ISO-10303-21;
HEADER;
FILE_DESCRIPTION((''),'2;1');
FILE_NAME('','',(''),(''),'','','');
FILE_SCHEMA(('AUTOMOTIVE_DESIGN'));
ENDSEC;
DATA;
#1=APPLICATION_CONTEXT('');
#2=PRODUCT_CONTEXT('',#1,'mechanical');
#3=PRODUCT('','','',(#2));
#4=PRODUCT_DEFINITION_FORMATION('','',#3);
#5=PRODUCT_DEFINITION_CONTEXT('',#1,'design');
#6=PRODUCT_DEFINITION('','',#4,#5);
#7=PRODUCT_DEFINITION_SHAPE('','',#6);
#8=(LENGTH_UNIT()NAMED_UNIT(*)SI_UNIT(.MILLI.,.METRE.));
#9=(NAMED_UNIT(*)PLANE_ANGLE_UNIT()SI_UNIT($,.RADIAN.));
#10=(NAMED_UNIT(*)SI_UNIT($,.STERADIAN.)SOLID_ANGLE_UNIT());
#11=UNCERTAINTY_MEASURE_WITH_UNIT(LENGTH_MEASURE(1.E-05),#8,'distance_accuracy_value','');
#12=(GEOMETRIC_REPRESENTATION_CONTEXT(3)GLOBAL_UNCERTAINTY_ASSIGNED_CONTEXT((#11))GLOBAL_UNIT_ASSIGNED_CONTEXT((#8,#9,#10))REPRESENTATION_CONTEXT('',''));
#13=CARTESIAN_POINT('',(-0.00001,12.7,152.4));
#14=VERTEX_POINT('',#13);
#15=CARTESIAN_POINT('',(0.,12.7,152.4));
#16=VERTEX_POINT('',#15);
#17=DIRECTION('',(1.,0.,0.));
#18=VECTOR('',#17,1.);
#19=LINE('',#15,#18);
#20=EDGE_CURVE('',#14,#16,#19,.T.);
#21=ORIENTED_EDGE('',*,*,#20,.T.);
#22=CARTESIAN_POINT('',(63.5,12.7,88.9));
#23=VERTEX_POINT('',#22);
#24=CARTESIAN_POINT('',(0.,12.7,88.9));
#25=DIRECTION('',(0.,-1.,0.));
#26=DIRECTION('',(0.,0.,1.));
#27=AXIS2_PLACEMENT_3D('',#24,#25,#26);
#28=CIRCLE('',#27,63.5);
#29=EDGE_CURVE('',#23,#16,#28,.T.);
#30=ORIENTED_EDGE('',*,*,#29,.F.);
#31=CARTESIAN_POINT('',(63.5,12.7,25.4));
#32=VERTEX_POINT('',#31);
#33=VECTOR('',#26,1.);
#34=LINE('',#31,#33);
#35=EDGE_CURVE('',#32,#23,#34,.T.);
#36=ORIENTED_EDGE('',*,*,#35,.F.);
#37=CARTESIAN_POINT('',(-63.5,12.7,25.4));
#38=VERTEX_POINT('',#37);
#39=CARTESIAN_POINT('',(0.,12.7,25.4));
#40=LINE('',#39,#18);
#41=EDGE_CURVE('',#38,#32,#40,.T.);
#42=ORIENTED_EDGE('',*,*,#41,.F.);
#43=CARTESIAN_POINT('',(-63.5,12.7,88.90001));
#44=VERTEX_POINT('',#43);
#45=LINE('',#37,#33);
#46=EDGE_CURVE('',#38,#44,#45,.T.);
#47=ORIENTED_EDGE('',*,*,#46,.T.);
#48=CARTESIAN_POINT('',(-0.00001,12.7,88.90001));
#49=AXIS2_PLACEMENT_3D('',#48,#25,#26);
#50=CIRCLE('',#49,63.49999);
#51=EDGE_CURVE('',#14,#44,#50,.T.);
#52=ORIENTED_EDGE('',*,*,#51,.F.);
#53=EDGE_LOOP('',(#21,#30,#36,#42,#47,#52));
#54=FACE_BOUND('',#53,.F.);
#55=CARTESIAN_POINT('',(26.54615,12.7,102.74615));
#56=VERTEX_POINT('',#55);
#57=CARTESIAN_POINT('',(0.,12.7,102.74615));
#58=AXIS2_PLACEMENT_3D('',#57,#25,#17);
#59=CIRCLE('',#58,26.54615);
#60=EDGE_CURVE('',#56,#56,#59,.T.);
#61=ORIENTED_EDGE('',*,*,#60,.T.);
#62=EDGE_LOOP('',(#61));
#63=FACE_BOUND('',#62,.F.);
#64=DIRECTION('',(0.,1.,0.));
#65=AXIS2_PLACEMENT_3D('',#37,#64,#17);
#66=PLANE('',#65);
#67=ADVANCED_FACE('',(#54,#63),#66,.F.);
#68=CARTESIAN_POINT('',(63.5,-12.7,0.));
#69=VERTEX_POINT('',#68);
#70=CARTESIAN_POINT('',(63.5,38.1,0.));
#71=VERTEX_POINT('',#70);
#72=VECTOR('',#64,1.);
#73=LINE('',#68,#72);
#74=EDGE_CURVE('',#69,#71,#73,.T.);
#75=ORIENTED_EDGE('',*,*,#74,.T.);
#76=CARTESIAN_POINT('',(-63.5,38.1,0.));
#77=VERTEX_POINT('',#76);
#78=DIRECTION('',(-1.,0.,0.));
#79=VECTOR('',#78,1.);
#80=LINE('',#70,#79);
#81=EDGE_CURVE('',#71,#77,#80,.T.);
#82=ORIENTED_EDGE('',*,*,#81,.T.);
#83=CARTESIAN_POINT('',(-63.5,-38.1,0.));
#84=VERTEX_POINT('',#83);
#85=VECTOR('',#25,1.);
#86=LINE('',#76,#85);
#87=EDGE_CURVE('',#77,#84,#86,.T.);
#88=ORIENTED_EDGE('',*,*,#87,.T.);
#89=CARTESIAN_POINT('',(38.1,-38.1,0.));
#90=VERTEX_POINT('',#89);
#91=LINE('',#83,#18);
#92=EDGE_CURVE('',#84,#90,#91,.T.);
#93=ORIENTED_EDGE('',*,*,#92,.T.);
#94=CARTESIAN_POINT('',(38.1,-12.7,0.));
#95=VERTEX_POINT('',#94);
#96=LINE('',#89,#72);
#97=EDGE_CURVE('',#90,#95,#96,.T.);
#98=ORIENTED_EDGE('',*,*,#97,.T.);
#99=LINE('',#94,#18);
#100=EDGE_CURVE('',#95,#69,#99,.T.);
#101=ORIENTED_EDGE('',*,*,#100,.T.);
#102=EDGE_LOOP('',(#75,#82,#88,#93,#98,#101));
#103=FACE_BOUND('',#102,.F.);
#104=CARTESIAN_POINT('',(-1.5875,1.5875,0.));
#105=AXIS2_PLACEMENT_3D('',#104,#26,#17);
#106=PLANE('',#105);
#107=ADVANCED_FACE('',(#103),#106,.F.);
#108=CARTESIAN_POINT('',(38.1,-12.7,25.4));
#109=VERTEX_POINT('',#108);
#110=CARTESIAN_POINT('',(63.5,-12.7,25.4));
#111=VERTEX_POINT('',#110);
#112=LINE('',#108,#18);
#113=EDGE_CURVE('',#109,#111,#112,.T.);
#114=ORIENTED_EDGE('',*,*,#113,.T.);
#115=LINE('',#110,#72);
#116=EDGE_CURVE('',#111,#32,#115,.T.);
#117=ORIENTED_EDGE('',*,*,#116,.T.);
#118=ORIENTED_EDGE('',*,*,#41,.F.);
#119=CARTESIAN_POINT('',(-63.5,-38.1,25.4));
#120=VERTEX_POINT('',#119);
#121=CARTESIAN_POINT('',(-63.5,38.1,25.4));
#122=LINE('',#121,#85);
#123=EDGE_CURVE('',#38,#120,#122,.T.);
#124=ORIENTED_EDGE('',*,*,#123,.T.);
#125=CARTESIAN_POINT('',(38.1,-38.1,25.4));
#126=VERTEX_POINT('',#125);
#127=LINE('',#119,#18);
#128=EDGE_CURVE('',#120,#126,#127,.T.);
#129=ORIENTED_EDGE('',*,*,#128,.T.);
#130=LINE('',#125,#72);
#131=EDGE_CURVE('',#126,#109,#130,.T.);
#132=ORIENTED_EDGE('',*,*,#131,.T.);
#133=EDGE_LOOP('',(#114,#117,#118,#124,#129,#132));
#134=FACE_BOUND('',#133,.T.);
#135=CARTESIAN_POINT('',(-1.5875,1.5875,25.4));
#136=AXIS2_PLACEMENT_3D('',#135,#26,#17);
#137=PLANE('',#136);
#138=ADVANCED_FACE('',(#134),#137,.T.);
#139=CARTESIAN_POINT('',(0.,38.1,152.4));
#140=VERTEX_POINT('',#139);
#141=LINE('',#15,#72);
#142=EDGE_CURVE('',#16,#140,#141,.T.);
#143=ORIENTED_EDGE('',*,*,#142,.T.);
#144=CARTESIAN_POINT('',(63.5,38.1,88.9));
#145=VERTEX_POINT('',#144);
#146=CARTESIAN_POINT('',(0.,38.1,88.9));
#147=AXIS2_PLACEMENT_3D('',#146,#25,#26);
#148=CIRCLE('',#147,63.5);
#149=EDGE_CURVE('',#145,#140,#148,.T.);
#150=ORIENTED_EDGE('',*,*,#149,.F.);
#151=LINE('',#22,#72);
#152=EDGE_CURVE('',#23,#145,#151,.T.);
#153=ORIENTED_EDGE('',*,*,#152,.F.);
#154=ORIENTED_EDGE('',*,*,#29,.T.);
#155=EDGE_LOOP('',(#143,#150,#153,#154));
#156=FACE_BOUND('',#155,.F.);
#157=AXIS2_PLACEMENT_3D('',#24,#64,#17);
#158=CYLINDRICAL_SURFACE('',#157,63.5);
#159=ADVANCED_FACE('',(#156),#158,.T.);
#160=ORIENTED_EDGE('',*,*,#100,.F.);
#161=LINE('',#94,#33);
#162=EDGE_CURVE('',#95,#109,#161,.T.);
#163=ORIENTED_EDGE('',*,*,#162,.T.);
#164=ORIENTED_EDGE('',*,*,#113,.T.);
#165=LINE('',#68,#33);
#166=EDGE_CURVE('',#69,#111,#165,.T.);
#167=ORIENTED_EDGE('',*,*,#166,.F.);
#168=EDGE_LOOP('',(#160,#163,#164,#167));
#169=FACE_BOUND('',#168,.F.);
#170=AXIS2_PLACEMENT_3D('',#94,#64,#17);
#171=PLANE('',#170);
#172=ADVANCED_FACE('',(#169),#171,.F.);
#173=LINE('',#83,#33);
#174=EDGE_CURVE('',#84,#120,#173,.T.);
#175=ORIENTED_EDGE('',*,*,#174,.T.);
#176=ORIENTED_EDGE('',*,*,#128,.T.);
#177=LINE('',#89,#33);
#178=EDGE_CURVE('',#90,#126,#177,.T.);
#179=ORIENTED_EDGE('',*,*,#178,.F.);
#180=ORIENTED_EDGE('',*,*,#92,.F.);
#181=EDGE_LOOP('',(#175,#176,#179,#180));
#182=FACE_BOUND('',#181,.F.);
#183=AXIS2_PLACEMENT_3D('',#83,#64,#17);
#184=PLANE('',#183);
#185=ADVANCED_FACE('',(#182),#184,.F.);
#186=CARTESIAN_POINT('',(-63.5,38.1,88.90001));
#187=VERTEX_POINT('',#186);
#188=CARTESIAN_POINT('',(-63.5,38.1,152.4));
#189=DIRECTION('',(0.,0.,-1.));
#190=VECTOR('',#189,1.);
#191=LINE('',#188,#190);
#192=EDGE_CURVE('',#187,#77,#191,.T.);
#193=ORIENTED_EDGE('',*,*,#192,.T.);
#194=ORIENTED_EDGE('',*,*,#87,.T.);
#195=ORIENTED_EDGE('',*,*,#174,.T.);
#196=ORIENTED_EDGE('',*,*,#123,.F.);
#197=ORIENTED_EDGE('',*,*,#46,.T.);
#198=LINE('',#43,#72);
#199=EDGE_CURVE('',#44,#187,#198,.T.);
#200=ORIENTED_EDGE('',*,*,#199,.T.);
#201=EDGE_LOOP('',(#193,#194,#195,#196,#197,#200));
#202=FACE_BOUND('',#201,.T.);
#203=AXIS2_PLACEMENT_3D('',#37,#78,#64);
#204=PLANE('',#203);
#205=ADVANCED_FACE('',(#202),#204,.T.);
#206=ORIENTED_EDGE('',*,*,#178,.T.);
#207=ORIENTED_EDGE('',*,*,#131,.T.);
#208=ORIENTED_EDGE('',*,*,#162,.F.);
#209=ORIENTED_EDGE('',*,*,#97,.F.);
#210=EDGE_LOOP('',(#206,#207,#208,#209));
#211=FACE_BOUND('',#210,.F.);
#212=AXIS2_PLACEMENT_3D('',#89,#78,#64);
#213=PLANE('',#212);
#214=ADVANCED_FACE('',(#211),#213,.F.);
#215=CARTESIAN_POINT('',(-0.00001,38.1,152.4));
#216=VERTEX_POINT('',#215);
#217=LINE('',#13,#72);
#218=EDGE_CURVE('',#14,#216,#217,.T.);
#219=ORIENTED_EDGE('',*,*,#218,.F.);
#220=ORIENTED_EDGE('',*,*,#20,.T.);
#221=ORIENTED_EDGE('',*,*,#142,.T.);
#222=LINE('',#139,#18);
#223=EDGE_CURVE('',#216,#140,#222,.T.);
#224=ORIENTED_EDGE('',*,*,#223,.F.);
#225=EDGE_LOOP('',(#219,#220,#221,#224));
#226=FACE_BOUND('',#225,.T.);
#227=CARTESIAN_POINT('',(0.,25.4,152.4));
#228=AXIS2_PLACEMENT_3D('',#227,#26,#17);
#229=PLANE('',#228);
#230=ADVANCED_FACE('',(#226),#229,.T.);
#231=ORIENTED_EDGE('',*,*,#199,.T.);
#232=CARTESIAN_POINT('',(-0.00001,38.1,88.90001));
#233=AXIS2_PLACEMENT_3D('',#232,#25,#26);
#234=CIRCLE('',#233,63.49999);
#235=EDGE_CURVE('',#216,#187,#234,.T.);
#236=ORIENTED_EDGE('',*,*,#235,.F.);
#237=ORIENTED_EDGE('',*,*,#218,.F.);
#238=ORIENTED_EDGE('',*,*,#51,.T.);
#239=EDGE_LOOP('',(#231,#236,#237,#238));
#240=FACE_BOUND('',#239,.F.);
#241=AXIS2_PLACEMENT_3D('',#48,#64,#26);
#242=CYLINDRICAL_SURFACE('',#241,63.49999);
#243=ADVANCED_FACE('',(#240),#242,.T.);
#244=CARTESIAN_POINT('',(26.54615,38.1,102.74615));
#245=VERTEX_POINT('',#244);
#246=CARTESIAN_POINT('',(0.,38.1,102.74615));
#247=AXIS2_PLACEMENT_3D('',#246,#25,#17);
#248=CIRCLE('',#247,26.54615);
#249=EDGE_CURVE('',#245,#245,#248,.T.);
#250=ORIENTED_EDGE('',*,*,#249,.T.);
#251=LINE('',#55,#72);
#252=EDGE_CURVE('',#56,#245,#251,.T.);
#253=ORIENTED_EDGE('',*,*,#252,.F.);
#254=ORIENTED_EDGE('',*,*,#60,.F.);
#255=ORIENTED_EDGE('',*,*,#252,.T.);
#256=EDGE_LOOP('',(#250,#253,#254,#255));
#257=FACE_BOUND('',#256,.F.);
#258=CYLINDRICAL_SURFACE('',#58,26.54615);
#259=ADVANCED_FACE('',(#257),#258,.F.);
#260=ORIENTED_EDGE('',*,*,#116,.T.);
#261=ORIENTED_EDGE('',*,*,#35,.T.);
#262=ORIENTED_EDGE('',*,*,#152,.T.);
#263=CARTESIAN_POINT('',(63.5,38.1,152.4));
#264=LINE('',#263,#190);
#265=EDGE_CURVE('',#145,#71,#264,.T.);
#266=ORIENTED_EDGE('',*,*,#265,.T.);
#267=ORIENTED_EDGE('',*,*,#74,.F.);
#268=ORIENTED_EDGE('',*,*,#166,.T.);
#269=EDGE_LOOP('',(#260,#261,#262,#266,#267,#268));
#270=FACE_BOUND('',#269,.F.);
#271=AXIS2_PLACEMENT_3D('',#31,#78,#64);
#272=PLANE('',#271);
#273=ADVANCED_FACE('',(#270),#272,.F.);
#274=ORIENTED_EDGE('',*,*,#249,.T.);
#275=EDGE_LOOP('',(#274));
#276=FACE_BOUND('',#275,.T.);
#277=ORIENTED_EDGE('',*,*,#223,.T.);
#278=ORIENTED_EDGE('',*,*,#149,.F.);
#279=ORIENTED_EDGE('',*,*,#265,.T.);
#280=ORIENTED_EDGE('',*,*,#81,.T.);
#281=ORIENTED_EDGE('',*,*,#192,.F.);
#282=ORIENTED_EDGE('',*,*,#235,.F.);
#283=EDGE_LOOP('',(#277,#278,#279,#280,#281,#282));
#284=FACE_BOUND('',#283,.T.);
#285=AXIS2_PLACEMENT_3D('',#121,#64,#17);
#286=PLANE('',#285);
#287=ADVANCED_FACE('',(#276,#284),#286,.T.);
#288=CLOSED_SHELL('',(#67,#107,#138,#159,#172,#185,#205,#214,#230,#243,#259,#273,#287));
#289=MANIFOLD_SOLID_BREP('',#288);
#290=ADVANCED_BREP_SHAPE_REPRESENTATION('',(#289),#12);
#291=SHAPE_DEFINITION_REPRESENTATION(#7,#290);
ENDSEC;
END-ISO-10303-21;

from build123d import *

# Parameters (mm, degrees)
F1_DEPTH = 25.4
F2_W     = 127
F2_H     = 25.4
F3_DEPTH = 127
F4_R     = 63.5
F5_R     = 63.49999
F6_R     = 26.5461499869
F7_DEPTH = 25.401


# Not quite as in the source:
# - a fillet or chamfer is up to 0.001 mm smaller than in the source, because OpenCascade refuses the exact size


with BuildPart() as f1:
    # F0 (on Top) → F1 (new body)
    with BuildSketch(Plane.XY):
        Polygon((63.5, -12.7), (63.5, 38.1), (-63.5, 38.1), (-63.5, -38.1), (38.1, -38.1), (38.1, -12.7), align=None)
    extrude(amount=F1_DEPTH)

    # F2 (on face) → F3 (join)
    with BuildSketch(Plane.XY.offset(25.4)):
        with Locations((0, 25.4)):
            Rectangle(F2_W, F2_H)
    extrude(amount=F3_DEPTH)

    # F4
    f4_edges = [f1.edges().sort_by_distance(p)[0] for p in [
        (63.5, 25.4, 152.4),
    ]]
    fillet(f4_edges, radius=F4_R)

    # F5 (radius 63.5 in the source; OpenCascade refuses exactly that, so slightly less here)
    f5_edges = [f1.edges().sort_by_distance(p)[0] for p in [
        (-63.5, 25.4, 152.4),
    ]]
    fillet(f5_edges, radius=F5_R)

    # F6 (on face) → F7 (cut, through all)
    with BuildSketch(Plane.XZ.offset(-12.7)):
        with Locations((0, 102.7461499869)):
            Circle(F6_R)
    extrude(amount=-F7_DEPTH, mode=Mode.SUBTRACT)


solid = f1.part
